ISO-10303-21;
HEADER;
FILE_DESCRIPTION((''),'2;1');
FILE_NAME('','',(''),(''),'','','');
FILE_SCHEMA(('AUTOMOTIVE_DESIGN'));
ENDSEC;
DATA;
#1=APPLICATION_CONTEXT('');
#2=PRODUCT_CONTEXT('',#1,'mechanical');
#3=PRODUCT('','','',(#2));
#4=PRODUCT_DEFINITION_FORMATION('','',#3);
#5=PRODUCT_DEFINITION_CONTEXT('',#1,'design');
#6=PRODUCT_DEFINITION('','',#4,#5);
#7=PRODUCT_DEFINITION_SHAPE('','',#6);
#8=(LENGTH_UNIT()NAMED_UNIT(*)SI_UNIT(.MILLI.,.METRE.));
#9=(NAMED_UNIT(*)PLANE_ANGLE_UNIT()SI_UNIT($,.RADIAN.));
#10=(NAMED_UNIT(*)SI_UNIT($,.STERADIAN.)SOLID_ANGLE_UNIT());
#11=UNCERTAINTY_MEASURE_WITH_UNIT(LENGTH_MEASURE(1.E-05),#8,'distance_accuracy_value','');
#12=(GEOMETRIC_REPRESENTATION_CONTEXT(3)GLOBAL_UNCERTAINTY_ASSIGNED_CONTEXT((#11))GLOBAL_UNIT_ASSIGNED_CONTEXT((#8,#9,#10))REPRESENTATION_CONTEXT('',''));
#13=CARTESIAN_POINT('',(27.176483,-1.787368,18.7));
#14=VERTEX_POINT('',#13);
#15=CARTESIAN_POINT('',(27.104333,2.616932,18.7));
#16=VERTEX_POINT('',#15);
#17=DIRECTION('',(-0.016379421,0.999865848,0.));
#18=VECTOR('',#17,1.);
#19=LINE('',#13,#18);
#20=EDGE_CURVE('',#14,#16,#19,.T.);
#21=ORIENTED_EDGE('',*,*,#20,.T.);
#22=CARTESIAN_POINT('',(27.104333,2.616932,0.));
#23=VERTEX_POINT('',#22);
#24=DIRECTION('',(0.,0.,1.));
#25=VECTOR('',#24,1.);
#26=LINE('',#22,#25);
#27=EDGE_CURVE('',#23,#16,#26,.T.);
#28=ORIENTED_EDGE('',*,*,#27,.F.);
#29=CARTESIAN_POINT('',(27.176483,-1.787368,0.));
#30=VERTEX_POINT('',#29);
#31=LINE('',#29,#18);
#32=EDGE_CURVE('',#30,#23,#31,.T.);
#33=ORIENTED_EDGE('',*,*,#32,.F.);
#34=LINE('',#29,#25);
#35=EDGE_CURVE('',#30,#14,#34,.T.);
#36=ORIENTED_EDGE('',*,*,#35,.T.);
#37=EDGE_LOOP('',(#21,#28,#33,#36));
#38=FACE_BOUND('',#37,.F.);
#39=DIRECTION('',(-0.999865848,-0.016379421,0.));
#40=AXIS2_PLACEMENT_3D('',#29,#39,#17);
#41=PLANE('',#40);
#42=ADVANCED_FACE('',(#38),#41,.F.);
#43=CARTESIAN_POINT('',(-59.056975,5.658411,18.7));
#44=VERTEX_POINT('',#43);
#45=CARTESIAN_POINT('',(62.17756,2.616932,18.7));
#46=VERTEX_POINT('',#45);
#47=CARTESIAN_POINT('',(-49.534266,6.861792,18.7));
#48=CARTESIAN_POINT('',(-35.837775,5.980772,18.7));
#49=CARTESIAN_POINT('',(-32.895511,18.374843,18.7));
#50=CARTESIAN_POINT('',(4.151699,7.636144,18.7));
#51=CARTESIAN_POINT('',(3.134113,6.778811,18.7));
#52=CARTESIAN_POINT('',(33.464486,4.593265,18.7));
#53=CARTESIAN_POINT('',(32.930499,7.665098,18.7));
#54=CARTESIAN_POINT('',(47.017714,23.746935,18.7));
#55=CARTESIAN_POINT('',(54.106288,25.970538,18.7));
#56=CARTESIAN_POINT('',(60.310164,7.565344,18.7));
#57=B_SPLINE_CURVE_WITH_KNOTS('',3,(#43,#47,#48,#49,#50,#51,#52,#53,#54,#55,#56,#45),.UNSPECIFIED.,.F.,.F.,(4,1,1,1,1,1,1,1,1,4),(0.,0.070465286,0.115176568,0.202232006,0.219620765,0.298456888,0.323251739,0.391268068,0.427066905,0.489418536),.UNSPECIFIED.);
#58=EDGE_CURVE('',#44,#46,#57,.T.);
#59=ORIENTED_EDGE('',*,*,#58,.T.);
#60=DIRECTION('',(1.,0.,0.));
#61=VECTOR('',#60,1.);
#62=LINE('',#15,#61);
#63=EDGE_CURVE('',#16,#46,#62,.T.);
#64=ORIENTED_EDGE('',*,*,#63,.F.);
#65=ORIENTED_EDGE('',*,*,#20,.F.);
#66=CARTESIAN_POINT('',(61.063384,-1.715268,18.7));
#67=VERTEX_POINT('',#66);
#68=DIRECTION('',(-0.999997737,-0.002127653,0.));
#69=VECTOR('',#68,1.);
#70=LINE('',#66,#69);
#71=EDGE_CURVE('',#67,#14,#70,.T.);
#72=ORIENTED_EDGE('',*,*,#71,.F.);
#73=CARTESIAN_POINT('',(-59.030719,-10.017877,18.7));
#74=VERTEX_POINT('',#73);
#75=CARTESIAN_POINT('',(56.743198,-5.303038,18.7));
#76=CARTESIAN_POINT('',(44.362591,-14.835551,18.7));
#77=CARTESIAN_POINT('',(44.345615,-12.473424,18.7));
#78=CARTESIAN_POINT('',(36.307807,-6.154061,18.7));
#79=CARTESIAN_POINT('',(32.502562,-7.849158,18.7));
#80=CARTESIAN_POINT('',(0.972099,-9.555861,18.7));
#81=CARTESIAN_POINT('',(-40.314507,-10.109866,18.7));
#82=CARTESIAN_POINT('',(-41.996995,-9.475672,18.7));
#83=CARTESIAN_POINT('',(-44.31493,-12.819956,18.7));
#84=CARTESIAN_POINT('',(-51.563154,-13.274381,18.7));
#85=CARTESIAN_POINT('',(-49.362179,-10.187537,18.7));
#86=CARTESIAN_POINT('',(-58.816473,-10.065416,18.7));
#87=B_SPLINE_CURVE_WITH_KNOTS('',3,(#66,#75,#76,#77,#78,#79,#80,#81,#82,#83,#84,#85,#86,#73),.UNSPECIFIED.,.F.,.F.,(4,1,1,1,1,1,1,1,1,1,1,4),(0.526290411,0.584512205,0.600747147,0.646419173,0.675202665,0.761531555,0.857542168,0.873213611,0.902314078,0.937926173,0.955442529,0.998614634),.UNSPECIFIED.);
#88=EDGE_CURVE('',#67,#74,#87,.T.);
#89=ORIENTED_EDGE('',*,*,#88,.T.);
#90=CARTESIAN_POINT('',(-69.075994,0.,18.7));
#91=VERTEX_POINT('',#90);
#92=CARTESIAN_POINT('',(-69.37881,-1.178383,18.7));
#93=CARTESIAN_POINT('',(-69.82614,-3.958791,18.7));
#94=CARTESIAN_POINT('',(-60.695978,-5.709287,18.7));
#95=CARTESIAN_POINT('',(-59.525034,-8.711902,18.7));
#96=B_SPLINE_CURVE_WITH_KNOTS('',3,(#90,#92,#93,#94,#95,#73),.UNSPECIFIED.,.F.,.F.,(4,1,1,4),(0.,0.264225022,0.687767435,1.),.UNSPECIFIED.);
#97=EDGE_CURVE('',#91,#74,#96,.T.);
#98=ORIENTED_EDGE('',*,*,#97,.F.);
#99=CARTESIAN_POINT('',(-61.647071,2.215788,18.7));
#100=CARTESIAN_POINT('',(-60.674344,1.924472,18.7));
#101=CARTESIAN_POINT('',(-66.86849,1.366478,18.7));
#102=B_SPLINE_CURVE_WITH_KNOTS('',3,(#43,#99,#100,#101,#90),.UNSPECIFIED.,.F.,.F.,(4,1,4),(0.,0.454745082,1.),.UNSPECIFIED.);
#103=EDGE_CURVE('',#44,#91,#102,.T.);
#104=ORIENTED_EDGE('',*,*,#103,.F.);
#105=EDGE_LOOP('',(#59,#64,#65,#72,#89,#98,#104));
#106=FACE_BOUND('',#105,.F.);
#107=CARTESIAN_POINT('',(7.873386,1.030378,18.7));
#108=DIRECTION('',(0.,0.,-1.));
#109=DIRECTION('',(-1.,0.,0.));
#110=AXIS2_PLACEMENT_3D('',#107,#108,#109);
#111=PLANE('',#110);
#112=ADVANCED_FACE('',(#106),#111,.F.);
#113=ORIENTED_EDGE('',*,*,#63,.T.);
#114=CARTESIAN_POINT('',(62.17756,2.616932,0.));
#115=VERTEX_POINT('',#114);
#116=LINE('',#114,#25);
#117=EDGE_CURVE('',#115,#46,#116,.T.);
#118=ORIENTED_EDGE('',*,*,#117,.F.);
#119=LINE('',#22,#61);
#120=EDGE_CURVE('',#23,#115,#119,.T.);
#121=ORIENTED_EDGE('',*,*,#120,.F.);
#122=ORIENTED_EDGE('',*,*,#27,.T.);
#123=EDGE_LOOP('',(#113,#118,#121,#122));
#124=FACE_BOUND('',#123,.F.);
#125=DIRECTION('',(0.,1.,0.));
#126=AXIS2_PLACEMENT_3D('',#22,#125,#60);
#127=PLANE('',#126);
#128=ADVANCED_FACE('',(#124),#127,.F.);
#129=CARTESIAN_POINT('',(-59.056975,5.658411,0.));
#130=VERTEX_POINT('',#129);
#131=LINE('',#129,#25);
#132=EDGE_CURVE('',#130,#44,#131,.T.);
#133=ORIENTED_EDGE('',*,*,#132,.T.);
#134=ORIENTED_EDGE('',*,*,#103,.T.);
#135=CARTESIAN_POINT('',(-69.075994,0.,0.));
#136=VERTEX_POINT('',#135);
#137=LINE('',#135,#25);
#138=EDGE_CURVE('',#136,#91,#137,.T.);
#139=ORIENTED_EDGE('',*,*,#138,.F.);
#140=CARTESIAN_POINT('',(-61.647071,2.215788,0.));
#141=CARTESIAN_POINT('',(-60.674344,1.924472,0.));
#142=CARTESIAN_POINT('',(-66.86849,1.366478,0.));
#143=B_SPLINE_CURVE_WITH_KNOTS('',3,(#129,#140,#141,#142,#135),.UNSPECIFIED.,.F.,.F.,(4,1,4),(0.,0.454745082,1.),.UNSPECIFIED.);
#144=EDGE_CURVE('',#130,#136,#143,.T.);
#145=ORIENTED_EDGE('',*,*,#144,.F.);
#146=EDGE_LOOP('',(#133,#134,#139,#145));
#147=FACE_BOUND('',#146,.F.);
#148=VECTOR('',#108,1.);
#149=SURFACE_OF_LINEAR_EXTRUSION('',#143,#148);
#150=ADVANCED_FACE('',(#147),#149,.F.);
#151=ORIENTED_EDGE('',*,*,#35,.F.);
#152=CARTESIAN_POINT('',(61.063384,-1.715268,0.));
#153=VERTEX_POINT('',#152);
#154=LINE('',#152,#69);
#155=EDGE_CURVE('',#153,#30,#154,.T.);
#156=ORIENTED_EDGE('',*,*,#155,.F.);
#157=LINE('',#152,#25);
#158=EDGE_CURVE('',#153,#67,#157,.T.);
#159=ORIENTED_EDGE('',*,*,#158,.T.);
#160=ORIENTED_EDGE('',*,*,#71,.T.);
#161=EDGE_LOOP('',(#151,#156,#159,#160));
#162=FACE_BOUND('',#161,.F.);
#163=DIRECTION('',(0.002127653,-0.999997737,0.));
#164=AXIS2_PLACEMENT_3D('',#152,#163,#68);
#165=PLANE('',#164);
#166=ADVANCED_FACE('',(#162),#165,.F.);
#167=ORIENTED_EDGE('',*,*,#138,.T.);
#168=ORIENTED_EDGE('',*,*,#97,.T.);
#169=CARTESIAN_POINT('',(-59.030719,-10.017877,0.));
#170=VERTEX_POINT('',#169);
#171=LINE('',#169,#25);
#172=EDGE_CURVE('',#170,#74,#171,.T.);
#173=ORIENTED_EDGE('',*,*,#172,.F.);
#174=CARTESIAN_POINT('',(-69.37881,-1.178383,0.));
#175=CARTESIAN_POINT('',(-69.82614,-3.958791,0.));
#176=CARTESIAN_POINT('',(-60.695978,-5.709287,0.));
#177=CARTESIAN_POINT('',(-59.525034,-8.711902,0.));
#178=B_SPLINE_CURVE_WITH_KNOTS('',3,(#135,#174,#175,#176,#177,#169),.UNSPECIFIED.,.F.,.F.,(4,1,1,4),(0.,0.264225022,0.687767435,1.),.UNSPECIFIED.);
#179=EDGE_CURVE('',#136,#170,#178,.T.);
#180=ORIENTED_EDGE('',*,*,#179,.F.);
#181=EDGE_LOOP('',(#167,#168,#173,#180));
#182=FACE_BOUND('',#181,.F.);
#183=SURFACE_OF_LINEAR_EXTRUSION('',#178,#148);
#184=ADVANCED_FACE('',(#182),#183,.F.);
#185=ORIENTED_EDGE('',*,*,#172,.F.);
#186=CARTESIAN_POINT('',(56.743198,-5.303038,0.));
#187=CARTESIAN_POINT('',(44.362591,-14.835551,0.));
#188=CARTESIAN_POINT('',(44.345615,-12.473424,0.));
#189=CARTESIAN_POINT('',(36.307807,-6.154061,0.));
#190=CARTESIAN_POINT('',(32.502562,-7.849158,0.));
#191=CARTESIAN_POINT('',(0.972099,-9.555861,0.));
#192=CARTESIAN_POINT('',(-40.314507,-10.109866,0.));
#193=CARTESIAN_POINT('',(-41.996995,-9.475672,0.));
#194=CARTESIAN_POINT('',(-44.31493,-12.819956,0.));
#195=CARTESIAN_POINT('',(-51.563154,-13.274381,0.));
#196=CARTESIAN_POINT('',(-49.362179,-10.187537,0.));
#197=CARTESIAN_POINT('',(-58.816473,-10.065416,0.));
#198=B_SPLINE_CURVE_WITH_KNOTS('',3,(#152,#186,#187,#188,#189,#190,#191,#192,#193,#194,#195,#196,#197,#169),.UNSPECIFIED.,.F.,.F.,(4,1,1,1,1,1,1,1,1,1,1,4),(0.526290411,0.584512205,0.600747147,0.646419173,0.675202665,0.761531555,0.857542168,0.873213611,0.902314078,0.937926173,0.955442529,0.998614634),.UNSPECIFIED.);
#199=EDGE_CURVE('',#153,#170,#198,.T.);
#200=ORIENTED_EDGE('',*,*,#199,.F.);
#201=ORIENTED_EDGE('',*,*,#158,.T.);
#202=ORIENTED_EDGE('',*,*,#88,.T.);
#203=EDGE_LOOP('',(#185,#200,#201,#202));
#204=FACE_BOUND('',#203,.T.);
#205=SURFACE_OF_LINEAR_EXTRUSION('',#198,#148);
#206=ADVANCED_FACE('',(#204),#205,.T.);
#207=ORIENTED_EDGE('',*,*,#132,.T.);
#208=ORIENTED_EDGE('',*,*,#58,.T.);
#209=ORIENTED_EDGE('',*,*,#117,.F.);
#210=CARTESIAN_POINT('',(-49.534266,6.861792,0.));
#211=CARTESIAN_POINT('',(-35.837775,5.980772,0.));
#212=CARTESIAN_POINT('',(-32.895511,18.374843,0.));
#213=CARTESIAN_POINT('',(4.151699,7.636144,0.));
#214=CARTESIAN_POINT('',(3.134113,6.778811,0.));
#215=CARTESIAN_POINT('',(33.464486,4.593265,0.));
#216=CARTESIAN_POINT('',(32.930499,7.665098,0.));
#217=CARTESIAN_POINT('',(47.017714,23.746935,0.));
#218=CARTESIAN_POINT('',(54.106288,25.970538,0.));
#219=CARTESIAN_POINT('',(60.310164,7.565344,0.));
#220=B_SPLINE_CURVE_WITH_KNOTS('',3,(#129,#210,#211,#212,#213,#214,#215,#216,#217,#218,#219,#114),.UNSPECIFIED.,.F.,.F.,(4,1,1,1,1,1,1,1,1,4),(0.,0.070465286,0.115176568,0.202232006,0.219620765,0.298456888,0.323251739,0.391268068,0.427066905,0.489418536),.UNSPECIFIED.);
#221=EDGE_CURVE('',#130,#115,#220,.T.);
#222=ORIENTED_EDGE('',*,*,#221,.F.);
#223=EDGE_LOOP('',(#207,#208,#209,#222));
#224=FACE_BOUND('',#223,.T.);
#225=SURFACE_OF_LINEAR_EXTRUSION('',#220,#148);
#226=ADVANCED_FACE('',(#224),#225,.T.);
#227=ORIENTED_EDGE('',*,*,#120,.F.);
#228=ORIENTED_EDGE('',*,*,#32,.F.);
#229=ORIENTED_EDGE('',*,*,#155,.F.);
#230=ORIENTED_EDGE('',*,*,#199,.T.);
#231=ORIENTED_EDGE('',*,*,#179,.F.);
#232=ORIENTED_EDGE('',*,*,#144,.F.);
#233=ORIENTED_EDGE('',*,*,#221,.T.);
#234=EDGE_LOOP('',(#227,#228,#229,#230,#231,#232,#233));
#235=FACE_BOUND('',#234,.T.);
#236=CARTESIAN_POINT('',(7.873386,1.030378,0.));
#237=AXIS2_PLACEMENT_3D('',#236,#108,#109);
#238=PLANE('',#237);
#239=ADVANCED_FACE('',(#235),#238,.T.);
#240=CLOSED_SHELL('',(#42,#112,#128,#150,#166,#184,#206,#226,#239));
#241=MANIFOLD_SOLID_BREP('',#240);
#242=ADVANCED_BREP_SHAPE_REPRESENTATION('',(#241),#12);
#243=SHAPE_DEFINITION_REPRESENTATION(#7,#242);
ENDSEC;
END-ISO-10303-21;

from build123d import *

# Parameters (mm, degrees)
F1_DEPTH = 18.7


with BuildPart() as f1:
    # F0 (on Top) → F1 (new body)
    with BuildSketch(Plane.XY):
        with BuildLine():
            add(Edge.make_bspline(
                [(-59.0569749475, 5.6584109552), (-49.5342656666, 6.8617920581), (-35.8377748643, 5.9807723499), (-32.8955110008, 18.374842932), (4.1516991759, 7.6361436104), (3.1341130081, 6.7788110675), (33.4644857612, 4.593264758), (32.9304993939, 7.6650975099), (47.0177142926, 23.7469349464), (54.1062876892, 25.9705380057), (60.3101640298, 7.5653437461), (62.1775598622, 2.6169322648)],
                knots=[0, 0, 0, 0, 0.0704652856, 0.1151765677, 0.2022320057, 0.2196207652, 0.2984568882, 0.3232517394, 0.3912680681, 0.4270669045, 0.4894185359, 0.4894185359, 0.4894185359, 0.4894185359], degree=3))
            add(Edge.make_bspline(
                [(-59.0569749475, 5.6584109552), (-61.6470714196, 2.2157883375), (-60.6743437248, 1.9244718037), (-66.8684896329, 1.3664782498), (-69.0759941936, 0)],
                knots=[0, 0, 0, 0, 0.4547450823, 1, 1, 1, 1], degree=3))
            add(Edge.make_bspline(
                [(-69.0759941936, 0), (-69.3788101739, -1.1783828473), (-69.8261399485, -3.9587908232), (-60.6959776767, -5.7092868497), (-59.5250335128, -8.7119018904), (-59.0307191014, -10.0178774446)],
                knots=[0, 0, 0, 0, 0.2642250224, 0.6877674352, 1, 1, 1, 1], degree=3))
            add(Edge.make_bspline(
                [(61.0633843308, -1.7152679098), (56.7431976085, -5.3030378612), (44.3625908851, -14.8355506131), (44.3456154781, -12.4734236778), (36.3078073079, -6.1540606425), (32.5025622398, -7.8491580238), (0.9720994688, -9.5558607176), (-40.314506836, -10.1098663132), (-41.996994883, -9.4756719581), (-44.3149303482, -12.8199559019), (-51.5631544474, -13.2743806674), (-49.3621790744, -10.1875372552), (-58.816473348, -10.0654157712), (-59.0307191014, -10.0178774446)],
                knots=[0.5262904111, 0.5262904111, 0.5262904111, 0.5262904111, 0.5845122047, 0.6007471474, 0.6464191733, 0.6752026649, 0.7615315554, 0.8575421685, 0.8732136115, 0.9023140778, 0.9379261728, 0.9554425291, 0.9986146344, 0.9986146344, 0.9986146344, 0.9986146344], degree=3))
            Line((61.0633843308, -1.7152679098), (27.176482603, -1.7873676261))
            Line((27.176482603, -1.7873676261), (27.1043330431, 2.6169322648))
            Line((27.1043330431, 2.6169322648), (42.1066259529, 2.6169322648))
            Line((42.1066259529, 2.6169322648), (62.1775598622, 2.6169322648))
        make_face()
    extrude(amount=F1_DEPTH)


solid = f1.part
